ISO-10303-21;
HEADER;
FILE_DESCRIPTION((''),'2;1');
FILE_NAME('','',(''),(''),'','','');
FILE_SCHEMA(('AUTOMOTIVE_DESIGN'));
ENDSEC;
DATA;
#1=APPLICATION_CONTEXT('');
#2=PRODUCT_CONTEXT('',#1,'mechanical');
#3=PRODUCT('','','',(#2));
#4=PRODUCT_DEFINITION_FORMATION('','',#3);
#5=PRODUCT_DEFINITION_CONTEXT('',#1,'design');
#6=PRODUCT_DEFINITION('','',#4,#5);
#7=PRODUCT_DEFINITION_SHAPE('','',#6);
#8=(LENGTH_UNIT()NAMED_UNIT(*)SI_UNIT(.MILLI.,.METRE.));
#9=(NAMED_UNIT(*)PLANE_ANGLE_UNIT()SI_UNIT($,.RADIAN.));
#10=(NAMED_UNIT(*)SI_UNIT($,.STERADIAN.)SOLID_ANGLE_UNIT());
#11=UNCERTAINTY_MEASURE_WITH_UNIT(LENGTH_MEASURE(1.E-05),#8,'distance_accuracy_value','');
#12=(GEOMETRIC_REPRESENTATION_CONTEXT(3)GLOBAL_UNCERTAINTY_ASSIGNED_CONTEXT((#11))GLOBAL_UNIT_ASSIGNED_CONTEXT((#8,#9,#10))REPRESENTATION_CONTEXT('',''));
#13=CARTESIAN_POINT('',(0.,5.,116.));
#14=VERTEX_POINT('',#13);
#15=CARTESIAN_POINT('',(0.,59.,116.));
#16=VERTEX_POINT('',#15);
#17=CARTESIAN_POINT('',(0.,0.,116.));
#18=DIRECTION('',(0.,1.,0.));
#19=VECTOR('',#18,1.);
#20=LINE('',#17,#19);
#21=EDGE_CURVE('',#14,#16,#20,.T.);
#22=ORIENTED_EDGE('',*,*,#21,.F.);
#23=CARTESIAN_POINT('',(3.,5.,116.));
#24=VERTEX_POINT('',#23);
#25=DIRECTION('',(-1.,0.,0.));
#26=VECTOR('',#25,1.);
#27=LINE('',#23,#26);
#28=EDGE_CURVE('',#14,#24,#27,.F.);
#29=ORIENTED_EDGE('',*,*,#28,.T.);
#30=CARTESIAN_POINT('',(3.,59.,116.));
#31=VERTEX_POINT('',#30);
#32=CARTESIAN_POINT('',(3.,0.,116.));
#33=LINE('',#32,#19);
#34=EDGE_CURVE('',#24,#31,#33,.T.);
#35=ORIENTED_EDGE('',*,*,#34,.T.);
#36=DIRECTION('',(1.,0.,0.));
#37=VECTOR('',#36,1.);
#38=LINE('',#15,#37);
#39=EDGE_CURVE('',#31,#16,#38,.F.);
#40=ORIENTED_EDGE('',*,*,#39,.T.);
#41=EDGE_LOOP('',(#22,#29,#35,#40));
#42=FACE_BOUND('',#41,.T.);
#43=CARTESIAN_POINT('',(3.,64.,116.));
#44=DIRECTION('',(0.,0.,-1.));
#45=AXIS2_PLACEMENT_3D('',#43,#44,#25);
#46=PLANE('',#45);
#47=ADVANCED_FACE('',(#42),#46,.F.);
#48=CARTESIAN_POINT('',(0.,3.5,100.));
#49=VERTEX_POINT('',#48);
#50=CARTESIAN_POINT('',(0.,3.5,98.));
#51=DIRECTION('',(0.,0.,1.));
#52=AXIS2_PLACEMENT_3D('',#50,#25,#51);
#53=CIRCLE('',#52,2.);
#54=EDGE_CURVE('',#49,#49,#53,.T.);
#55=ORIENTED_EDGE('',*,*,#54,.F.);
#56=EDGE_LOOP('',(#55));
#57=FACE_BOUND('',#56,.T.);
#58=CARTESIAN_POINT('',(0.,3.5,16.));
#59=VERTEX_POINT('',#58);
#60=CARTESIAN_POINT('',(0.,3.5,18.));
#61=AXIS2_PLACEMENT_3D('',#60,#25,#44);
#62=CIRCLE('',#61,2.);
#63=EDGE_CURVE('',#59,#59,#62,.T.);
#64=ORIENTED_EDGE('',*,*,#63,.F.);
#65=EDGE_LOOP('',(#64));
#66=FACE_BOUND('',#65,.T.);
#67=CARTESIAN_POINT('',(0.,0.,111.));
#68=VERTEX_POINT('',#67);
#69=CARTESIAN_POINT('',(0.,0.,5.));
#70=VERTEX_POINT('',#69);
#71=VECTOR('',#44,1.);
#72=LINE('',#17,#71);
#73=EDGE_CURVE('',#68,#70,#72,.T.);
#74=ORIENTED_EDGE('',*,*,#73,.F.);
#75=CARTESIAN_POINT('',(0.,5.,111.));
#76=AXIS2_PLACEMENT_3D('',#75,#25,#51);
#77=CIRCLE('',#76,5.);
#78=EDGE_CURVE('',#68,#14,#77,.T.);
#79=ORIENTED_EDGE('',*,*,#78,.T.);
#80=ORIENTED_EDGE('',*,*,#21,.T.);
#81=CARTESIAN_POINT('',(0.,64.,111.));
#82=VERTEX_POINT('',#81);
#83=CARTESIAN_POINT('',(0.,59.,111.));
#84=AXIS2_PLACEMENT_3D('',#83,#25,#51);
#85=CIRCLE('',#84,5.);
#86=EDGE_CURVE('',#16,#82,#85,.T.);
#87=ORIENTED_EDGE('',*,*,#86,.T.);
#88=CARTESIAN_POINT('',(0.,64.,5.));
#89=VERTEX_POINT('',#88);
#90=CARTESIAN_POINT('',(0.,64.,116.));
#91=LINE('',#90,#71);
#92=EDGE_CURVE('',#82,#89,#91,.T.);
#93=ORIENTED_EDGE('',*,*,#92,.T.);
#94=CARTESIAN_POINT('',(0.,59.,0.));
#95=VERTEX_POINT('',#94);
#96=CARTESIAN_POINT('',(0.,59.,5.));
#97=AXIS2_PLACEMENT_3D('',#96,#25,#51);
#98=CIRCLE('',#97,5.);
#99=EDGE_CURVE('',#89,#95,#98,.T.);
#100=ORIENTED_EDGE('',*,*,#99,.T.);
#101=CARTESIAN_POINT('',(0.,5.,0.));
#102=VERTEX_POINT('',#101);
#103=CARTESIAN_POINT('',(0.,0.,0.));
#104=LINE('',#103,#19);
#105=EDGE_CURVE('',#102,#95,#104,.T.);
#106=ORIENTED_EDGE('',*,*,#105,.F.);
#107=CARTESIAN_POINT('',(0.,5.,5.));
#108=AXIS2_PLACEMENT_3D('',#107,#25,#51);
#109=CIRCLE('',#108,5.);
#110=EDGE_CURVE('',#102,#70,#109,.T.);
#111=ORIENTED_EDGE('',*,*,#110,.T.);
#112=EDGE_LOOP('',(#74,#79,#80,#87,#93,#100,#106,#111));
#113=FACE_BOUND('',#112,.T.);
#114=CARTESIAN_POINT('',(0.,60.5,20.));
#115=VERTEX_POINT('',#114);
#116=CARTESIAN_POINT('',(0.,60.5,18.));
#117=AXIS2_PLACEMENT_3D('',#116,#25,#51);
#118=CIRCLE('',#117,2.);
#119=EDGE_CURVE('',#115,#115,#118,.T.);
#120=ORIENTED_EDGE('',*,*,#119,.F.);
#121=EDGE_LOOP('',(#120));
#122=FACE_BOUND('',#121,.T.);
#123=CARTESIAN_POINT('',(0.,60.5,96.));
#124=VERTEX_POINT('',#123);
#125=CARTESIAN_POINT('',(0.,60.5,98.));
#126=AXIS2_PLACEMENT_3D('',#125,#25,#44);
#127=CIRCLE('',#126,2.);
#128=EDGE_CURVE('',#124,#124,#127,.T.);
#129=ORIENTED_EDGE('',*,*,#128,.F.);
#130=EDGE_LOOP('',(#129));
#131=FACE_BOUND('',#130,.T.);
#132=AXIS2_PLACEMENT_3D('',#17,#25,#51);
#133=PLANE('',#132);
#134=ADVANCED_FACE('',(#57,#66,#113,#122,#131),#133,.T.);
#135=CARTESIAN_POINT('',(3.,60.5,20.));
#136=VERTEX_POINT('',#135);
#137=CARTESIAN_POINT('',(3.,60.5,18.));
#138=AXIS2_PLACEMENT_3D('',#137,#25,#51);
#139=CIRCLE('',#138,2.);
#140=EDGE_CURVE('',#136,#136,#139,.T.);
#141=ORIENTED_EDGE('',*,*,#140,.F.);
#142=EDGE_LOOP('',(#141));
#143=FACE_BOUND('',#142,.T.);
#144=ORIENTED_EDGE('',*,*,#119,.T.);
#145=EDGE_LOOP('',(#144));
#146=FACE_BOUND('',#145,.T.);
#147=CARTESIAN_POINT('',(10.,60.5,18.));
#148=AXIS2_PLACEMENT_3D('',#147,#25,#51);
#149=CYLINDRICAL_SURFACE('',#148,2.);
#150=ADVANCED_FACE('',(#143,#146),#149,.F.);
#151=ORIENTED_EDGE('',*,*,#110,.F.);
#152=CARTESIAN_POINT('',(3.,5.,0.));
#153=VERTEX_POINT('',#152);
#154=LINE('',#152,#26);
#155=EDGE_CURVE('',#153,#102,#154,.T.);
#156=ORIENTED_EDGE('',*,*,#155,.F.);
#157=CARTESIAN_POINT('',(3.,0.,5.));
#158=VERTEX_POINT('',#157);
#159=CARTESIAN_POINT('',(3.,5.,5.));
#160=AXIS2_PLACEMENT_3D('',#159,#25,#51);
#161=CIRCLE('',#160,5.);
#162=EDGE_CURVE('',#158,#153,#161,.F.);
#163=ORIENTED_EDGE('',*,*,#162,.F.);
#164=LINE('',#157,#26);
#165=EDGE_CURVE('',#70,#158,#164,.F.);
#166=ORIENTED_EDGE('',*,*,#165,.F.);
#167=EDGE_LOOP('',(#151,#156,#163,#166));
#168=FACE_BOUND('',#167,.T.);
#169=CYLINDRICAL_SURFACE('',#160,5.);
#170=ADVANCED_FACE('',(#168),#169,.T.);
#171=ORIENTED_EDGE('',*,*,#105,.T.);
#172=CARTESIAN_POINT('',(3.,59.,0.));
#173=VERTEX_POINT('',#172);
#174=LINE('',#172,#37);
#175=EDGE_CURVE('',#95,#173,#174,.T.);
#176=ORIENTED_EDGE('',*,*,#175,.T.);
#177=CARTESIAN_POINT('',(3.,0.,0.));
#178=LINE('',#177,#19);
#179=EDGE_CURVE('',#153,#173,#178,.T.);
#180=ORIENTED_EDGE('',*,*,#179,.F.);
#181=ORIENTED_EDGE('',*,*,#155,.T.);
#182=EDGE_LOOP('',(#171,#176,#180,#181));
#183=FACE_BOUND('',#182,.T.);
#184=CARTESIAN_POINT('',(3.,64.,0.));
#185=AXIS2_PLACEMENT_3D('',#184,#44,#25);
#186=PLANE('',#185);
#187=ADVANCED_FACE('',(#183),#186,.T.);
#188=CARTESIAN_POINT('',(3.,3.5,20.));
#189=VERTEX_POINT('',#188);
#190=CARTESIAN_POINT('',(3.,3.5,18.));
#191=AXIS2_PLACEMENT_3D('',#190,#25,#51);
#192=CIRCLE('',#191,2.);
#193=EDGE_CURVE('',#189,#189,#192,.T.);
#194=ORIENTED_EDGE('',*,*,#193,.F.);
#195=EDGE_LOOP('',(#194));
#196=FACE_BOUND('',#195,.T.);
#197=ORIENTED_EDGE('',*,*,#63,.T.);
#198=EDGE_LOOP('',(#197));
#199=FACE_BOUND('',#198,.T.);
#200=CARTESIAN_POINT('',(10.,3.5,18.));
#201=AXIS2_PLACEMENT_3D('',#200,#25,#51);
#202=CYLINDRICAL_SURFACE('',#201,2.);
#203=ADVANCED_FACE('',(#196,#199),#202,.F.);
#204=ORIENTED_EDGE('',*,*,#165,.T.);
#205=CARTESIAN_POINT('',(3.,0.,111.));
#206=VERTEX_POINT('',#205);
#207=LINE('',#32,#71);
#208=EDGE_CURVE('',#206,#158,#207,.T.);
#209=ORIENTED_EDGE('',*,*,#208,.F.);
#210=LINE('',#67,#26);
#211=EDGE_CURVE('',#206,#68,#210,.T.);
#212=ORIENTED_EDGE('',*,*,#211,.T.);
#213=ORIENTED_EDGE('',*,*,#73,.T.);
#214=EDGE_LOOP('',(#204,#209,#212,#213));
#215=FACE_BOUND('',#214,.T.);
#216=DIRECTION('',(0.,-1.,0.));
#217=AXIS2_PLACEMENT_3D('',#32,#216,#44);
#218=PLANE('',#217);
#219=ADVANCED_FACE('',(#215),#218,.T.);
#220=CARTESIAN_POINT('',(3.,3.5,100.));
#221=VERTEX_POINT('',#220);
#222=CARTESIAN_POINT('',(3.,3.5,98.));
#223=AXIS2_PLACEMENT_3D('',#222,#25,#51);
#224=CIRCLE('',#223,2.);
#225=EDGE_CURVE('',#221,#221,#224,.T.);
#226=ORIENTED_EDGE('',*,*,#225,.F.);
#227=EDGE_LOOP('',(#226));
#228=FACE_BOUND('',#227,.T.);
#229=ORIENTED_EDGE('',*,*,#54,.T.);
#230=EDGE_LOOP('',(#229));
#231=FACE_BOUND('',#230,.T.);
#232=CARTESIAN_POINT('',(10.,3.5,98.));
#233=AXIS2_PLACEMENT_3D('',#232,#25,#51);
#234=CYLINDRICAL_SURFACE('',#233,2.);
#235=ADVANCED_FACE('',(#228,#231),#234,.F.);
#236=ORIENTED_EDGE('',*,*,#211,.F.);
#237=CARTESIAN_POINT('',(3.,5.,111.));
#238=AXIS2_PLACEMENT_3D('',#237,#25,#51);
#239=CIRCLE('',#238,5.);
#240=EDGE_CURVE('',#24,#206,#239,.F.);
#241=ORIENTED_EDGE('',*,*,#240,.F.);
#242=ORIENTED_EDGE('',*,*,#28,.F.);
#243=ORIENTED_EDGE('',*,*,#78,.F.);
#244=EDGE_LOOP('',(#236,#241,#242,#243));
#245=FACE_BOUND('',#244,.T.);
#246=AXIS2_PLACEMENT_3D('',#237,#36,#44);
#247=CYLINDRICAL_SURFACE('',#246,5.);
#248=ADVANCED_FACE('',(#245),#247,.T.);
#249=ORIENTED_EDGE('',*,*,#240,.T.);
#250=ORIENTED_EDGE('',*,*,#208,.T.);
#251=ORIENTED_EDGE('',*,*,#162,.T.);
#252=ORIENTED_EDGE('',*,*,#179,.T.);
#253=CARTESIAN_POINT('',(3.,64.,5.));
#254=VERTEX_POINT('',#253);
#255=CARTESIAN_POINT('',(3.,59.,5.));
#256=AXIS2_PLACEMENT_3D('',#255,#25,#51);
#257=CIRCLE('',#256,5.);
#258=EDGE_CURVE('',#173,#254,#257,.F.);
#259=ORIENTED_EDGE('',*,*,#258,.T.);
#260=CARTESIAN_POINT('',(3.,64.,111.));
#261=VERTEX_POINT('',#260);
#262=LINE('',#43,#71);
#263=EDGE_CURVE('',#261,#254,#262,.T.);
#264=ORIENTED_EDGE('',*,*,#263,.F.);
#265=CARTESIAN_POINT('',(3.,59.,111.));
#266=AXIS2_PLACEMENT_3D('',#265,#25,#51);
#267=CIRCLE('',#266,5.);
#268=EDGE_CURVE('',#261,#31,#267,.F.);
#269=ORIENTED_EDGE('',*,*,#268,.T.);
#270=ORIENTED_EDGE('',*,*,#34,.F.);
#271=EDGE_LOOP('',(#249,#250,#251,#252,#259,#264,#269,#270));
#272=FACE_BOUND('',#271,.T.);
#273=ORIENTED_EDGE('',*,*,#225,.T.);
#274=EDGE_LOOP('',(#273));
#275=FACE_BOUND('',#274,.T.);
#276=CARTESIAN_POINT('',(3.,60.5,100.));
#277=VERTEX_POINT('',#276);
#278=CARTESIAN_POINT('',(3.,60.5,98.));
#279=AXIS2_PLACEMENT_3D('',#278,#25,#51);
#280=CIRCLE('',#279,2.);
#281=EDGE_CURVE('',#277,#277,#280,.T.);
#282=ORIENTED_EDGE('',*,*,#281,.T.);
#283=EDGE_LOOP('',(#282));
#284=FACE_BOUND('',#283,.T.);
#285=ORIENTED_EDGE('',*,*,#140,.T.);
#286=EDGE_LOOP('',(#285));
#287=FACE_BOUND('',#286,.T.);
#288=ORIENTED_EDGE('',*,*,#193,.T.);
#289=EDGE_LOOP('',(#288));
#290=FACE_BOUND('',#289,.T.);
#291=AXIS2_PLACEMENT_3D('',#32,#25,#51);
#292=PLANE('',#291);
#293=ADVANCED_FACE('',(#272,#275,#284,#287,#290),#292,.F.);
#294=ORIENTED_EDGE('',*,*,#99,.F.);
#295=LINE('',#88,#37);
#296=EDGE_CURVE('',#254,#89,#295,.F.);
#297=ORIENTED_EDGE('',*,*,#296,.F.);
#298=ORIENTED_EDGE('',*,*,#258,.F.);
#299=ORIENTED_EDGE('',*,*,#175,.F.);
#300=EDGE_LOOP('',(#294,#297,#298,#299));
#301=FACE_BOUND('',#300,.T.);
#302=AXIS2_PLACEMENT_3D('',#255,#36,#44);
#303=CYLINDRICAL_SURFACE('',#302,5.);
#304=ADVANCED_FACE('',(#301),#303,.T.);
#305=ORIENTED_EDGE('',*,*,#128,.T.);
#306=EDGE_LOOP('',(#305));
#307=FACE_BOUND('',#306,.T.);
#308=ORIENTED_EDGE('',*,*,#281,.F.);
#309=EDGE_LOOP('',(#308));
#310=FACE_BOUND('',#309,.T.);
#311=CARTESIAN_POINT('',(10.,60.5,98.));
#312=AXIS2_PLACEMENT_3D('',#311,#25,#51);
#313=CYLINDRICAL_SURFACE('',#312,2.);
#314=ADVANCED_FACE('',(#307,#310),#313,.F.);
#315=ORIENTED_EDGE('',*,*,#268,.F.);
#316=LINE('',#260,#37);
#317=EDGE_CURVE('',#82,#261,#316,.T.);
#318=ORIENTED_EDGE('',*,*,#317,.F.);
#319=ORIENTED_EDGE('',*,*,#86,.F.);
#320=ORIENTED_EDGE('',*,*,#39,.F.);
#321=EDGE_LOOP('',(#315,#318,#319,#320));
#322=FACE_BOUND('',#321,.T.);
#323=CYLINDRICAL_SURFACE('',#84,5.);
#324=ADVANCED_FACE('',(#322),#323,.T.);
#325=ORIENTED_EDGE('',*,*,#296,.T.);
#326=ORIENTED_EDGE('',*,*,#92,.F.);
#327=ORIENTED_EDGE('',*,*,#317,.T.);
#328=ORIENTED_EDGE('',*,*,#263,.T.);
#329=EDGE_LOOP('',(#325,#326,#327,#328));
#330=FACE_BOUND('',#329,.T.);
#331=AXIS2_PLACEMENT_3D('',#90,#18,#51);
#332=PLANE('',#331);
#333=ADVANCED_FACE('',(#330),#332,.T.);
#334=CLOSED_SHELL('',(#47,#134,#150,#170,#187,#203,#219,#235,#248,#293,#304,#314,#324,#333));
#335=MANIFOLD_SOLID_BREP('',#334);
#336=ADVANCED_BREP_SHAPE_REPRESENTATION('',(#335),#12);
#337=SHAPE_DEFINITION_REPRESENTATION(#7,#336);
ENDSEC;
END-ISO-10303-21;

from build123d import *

# Parameters (mm, degrees)
SKETCH1_W          = 3
SKETCH1_H          = 64
BASE_FLANGE1_DEPTH = 116
SKETCH3_R          = 2
CUT_EXTRUDE1_DEPTH = 10
FILLET1_R          = 5


# Sheet-metal steps are written as plain solids
with BuildPart() as part:
    # Sketch1 → Base-Flange1 (new body)
    with BuildSketch(Plane.XY):
        with Locations((1.5, 32)):
            Rectangle(SKETCH1_W, SKETCH1_H)
    extrude(amount=BASE_FLANGE1_DEPTH)

    # Sketch3 → Cut-Extrude1 (cut)
    with BuildSketch(Plane.ZY):
        with Locations((18, 60.5)):
            Circle(SKETCH3_R)
        with Locations((98, 60.5)):
            Circle(SKETCH3_R)
        with Locations((98, 3.5)):
            Circle(SKETCH3_R)
        with Locations((18, 3.5)):
            Circle(SKETCH3_R)
    extrude(amount=-CUT_EXTRUDE1_DEPTH, mode=Mode.SUBTRACT)

    # Fillet1
    fillet1_edges = [part.edges().sort_by_distance(p)[0] for p in [
        (1.5, 0, 116),
        (1.5, 0, 0),
        (1.5, 64, 0),
        (1.5, 64, 116),
    ]]
    fillet(fillet1_edges, radius=FILLET1_R)


solid = part.part
